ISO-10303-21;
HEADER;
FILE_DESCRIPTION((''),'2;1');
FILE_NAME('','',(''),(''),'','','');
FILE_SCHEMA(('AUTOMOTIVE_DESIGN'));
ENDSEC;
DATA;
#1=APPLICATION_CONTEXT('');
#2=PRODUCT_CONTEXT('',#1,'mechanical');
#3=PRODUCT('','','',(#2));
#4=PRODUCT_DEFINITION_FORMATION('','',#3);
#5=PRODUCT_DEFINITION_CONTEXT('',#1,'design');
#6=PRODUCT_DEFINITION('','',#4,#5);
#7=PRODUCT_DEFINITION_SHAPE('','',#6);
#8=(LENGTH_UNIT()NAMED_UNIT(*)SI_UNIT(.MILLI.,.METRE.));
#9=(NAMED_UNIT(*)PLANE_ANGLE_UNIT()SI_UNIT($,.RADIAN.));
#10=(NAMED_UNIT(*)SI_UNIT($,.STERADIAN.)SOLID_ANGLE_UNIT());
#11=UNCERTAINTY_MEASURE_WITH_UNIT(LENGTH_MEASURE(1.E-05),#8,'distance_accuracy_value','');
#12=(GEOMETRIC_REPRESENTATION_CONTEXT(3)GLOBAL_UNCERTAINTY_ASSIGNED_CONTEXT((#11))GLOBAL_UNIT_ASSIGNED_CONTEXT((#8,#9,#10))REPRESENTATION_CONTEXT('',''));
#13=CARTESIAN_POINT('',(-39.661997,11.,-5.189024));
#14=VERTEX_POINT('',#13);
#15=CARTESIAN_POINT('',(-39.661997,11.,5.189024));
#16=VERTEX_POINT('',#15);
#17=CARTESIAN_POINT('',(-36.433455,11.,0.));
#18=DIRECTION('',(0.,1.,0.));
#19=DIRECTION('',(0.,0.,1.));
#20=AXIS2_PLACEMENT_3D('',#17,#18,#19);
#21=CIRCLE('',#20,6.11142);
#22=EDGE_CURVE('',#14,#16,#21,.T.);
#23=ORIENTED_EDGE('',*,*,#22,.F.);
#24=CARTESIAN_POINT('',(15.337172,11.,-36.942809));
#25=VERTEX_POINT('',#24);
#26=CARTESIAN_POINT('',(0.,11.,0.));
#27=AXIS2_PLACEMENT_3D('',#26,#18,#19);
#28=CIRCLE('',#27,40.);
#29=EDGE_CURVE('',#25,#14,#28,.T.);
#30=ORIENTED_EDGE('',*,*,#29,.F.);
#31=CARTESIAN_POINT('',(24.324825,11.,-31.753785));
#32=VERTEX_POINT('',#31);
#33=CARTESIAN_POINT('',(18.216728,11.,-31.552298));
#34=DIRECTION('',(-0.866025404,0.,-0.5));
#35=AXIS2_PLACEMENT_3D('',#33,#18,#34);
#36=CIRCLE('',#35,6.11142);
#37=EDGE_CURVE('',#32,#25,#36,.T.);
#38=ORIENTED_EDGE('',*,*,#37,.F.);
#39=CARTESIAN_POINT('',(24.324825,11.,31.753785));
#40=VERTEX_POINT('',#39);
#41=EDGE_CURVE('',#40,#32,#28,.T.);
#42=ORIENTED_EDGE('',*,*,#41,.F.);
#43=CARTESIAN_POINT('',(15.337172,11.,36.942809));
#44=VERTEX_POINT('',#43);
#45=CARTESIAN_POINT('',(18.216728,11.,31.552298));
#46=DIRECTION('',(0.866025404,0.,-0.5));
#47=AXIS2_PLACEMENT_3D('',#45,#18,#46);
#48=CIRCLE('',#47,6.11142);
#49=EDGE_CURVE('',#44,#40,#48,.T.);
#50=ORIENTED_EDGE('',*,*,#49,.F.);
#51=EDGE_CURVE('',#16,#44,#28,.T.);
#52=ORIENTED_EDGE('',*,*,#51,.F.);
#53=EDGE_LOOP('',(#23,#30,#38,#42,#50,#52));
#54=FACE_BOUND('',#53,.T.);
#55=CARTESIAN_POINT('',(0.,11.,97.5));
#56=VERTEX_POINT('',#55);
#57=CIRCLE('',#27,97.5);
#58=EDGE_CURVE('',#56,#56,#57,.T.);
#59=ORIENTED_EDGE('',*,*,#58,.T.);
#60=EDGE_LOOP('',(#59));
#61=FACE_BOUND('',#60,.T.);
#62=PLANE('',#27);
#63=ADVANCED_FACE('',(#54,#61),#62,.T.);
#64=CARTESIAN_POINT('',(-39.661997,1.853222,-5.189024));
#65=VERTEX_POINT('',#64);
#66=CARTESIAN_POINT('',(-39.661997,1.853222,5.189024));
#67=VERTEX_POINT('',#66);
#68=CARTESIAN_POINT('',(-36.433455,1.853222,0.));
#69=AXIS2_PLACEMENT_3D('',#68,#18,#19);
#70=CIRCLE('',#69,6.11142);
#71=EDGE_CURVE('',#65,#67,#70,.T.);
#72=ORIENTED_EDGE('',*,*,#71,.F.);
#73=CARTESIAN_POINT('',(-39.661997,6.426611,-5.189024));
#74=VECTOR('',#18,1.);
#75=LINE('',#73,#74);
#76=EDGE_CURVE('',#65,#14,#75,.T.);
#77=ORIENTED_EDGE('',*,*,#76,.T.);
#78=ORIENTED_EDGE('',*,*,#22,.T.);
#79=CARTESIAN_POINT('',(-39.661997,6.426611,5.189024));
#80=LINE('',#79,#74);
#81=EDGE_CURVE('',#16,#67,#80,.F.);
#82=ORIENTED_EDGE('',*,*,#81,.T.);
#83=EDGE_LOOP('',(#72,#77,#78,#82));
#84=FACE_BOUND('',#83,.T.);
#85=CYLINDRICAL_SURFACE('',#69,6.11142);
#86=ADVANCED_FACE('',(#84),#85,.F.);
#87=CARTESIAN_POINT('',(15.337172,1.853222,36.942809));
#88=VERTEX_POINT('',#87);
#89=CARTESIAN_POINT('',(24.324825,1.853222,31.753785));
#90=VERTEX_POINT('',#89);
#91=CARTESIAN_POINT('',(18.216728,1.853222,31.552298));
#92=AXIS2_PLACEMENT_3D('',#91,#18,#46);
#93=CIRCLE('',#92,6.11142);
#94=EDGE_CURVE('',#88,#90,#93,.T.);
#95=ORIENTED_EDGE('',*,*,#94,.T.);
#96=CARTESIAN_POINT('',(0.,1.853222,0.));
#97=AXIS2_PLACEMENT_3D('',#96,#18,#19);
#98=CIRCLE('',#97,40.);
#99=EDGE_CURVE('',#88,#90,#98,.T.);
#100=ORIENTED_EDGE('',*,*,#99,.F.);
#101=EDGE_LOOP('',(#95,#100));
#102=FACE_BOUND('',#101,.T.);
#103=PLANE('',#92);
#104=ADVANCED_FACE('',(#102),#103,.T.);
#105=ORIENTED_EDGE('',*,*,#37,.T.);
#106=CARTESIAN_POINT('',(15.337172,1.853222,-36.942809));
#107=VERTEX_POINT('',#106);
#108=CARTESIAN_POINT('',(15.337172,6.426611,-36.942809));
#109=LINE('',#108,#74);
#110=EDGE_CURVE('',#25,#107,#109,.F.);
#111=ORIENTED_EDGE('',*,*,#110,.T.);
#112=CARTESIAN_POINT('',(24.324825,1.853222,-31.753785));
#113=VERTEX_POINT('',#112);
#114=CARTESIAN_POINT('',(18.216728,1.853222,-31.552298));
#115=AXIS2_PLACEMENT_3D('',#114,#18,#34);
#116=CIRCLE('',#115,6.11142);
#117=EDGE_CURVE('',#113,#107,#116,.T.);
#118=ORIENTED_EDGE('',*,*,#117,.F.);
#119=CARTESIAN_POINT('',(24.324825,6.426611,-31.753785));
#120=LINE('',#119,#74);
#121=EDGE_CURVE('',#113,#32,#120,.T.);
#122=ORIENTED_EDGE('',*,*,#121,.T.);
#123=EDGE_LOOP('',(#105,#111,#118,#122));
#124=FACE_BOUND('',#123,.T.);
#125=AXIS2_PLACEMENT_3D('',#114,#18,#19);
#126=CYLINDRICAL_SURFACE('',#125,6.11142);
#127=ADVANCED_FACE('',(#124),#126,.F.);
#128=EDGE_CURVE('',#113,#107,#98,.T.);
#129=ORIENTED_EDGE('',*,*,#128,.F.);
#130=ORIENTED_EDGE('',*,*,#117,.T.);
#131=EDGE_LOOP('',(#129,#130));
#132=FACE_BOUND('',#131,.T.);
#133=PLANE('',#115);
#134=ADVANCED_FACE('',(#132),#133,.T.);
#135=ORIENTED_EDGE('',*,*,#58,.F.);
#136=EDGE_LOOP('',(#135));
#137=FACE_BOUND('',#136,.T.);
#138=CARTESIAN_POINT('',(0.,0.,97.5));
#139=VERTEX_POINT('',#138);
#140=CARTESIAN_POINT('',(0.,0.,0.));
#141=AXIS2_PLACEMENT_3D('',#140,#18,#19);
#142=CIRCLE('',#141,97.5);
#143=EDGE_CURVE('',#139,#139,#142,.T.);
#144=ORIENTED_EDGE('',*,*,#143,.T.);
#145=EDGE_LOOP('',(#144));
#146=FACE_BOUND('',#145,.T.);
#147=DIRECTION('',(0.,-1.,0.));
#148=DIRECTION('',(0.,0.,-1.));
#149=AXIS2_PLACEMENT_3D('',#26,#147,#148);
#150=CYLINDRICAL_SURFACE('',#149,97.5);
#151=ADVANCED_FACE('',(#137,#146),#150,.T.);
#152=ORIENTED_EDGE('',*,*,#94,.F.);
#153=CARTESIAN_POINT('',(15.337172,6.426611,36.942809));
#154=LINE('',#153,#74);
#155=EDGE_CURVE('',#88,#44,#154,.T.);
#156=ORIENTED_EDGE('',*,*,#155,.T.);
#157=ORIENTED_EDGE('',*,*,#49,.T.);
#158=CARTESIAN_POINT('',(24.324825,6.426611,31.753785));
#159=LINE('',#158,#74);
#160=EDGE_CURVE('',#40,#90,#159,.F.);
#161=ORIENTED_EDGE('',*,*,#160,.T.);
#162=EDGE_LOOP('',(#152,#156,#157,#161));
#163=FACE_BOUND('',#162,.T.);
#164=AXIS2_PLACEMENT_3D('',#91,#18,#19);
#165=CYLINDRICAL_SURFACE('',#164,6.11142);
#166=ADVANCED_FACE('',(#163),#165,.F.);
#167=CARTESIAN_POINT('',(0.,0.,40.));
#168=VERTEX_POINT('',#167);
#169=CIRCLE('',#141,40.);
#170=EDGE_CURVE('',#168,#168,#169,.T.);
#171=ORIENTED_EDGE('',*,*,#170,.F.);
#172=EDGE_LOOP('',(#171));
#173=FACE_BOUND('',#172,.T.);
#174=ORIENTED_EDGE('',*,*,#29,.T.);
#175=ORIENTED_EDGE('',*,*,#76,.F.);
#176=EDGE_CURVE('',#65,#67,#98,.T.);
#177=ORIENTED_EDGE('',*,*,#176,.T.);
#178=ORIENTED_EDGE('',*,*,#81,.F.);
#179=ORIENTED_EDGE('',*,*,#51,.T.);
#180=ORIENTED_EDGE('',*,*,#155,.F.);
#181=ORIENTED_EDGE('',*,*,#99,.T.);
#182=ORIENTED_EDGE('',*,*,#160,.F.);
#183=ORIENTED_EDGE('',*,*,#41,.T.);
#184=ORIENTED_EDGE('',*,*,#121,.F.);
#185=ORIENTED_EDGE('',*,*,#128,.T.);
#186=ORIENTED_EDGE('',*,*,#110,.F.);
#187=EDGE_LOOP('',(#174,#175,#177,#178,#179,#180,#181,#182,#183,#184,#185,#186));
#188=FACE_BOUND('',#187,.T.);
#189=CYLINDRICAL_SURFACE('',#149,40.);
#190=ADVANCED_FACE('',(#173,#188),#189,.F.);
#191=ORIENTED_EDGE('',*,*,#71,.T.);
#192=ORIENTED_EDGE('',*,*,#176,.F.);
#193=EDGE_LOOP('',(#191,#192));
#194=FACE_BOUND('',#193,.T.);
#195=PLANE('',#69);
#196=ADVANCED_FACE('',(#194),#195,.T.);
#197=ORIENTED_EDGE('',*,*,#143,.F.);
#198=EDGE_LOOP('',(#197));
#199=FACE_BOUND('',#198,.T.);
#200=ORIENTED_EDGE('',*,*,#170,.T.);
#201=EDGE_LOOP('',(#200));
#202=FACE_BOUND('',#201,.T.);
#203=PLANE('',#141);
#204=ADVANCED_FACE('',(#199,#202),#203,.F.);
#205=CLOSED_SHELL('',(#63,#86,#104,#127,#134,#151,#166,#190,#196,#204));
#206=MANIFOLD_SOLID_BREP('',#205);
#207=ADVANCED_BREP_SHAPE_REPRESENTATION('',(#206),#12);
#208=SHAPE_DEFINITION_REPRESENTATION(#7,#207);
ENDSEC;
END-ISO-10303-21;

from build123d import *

# Parameters (mm, degrees)
SKETCH1_R           = 97.5
BOSS_EXTRUDE1_DEPTH = 11
SKETCH2_R           = 40
CUT_EXTRUDE1_DEPTH  = 139.32389526
SKETCH3_R           = 6.111419921
CUT_EXTRUDE2_DEPTH  = 9.146778329
CIRPATTERN1_COUNT   = 3


with BuildPart() as part:
    # Sketch1 → Boss-Extrude1 (new body)
    with BuildSketch(Plane(origin=(0, 0, 0), x_dir=(1, 0, 0), z_dir=(0, 1, 0))):
        Circle(SKETCH1_R)
    extrude(amount=BOSS_EXTRUDE1_DEPTH)

    # Sketch2 → Cut-Extrude1 (cut, through all)
    with BuildSketch(Plane(origin=(0, 0, 0), x_dir=(1, 0, 0), z_dir=(0, 1, 0))):
        Circle(SKETCH2_R)
    extrude(amount=CUT_EXTRUDE1_DEPTH, mode=Mode.SUBTRACT)

    # Sketch3 → Cut-Extrude2 (cut)
    with BuildSketch(Plane(origin=(0, 11, 0), x_dir=(1, 0, 0), z_dir=(0, 1, 0))):
        with Locations((-36.433455365, 0)):
            Circle(SKETCH3_R)
    cut_extrude2 = extrude(amount=-CUT_EXTRUDE2_DEPTH, mode=Mode.SUBTRACT)

    # CirPattern1: Cut-Extrude2 ×3 about axis
    cirpattern1_axis = Axis((0, 0, 0), (0, 1, 0))
    for i in range(1, CIRPATTERN1_COUNT):
        add(cut_extrude2.rotate(cirpattern1_axis, i * 360 / CIRPATTERN1_COUNT), mode=Mode.SUBTRACT)


solid = part.part
